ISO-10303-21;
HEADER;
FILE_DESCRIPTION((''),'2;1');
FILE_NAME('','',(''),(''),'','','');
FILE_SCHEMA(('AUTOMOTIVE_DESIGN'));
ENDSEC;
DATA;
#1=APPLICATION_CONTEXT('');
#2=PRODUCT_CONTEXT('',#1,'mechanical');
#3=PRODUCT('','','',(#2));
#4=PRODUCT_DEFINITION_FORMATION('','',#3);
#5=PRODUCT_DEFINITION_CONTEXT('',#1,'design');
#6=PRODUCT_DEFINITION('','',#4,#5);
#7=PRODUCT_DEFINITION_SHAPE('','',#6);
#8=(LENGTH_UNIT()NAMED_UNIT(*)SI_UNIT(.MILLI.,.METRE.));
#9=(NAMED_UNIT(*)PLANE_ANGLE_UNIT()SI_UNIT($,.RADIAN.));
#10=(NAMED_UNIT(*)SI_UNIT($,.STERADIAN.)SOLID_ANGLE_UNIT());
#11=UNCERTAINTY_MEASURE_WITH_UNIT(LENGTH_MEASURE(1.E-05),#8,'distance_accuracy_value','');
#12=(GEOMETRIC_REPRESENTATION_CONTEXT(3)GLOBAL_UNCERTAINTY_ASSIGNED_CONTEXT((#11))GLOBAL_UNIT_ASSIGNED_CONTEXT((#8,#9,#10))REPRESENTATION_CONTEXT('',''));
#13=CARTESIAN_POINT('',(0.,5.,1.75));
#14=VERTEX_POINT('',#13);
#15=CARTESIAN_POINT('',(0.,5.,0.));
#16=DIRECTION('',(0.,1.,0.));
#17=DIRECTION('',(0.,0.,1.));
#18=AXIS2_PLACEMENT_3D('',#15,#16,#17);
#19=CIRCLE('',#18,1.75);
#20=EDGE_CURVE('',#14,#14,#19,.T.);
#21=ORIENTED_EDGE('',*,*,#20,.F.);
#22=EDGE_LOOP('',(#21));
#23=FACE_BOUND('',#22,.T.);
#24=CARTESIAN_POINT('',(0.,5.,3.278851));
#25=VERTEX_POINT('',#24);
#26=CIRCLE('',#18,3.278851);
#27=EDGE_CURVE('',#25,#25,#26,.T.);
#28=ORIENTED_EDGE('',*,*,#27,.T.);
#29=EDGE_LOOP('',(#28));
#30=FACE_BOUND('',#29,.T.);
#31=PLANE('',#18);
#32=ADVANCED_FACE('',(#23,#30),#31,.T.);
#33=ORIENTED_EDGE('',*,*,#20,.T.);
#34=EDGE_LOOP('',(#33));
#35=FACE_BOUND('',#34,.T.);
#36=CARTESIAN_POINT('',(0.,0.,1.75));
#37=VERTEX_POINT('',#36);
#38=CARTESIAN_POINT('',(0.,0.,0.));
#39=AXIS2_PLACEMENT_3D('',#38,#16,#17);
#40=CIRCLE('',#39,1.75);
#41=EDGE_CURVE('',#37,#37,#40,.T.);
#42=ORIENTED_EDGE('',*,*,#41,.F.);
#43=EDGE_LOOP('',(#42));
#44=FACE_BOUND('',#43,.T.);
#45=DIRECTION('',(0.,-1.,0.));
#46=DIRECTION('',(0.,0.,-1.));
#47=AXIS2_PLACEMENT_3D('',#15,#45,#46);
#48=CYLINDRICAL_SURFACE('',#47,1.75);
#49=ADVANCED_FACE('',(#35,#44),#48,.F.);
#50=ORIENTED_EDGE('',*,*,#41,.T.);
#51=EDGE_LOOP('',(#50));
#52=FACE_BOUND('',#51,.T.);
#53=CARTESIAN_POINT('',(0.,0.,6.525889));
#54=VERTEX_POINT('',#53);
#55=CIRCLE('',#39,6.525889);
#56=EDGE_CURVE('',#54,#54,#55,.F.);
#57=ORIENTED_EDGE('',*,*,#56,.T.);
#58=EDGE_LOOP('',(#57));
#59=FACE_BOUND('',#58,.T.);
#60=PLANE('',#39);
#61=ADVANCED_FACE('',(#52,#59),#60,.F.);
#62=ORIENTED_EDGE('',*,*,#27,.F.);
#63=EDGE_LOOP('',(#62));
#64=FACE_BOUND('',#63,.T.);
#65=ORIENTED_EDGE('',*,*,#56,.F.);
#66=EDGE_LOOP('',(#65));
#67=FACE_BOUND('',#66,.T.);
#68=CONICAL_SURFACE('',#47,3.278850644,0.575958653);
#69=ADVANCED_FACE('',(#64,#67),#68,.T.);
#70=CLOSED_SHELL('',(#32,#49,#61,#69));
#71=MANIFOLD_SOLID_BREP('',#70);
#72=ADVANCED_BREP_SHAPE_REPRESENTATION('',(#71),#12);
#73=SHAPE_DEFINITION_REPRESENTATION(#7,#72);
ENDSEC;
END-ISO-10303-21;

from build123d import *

# Parameters (mm, degrees)
SKETCH1_R           = 7.5
SKETCH1_R_2         = 1.75
BOSS_EXTRUDE1_DEPTH = 5
CHAMFER1_SIZE       = 6.5
CHAMFER1_SIZE_2     = 4.221149356


with BuildPart() as part:
    # Sketch1 → Boss-Extrude1 (new body)
    with BuildSketch(Plane(origin=(0, 0, 0), x_dir=(1, 0, 0), z_dir=(0, 1, 0))):
        with Locations(Location((0, 0, 0), (0, 0, 270))):
            Circle(SKETCH1_R)
        with Locations(Location((0, 0, 0), (0, 0, 270))):
            Circle(SKETCH1_R_2, mode=Mode.SUBTRACT)
    extrude(amount=BOSS_EXTRUDE1_DEPTH)

    # Chamfer1
    # the kernel refuses this chamfer: 6.5, 4.221149356 mm, written as the material it takes off along each edge
    with BuildSketch(Plane(origin=(0, 5, 0), x_dir=(0, 0, 1), z_dir=(-1, 0, 0))) as chamfer1_piece_1:
        Polygon((7.5, -CHAMFER1_SIZE), (7.5 - CHAMFER1_SIZE_2, 0), (7.5, 0), align=None)
    revolve(axis=Axis((0, 5, 0), (0, 1, 0)), mode=Mode.SUBTRACT)


solid = part.part
